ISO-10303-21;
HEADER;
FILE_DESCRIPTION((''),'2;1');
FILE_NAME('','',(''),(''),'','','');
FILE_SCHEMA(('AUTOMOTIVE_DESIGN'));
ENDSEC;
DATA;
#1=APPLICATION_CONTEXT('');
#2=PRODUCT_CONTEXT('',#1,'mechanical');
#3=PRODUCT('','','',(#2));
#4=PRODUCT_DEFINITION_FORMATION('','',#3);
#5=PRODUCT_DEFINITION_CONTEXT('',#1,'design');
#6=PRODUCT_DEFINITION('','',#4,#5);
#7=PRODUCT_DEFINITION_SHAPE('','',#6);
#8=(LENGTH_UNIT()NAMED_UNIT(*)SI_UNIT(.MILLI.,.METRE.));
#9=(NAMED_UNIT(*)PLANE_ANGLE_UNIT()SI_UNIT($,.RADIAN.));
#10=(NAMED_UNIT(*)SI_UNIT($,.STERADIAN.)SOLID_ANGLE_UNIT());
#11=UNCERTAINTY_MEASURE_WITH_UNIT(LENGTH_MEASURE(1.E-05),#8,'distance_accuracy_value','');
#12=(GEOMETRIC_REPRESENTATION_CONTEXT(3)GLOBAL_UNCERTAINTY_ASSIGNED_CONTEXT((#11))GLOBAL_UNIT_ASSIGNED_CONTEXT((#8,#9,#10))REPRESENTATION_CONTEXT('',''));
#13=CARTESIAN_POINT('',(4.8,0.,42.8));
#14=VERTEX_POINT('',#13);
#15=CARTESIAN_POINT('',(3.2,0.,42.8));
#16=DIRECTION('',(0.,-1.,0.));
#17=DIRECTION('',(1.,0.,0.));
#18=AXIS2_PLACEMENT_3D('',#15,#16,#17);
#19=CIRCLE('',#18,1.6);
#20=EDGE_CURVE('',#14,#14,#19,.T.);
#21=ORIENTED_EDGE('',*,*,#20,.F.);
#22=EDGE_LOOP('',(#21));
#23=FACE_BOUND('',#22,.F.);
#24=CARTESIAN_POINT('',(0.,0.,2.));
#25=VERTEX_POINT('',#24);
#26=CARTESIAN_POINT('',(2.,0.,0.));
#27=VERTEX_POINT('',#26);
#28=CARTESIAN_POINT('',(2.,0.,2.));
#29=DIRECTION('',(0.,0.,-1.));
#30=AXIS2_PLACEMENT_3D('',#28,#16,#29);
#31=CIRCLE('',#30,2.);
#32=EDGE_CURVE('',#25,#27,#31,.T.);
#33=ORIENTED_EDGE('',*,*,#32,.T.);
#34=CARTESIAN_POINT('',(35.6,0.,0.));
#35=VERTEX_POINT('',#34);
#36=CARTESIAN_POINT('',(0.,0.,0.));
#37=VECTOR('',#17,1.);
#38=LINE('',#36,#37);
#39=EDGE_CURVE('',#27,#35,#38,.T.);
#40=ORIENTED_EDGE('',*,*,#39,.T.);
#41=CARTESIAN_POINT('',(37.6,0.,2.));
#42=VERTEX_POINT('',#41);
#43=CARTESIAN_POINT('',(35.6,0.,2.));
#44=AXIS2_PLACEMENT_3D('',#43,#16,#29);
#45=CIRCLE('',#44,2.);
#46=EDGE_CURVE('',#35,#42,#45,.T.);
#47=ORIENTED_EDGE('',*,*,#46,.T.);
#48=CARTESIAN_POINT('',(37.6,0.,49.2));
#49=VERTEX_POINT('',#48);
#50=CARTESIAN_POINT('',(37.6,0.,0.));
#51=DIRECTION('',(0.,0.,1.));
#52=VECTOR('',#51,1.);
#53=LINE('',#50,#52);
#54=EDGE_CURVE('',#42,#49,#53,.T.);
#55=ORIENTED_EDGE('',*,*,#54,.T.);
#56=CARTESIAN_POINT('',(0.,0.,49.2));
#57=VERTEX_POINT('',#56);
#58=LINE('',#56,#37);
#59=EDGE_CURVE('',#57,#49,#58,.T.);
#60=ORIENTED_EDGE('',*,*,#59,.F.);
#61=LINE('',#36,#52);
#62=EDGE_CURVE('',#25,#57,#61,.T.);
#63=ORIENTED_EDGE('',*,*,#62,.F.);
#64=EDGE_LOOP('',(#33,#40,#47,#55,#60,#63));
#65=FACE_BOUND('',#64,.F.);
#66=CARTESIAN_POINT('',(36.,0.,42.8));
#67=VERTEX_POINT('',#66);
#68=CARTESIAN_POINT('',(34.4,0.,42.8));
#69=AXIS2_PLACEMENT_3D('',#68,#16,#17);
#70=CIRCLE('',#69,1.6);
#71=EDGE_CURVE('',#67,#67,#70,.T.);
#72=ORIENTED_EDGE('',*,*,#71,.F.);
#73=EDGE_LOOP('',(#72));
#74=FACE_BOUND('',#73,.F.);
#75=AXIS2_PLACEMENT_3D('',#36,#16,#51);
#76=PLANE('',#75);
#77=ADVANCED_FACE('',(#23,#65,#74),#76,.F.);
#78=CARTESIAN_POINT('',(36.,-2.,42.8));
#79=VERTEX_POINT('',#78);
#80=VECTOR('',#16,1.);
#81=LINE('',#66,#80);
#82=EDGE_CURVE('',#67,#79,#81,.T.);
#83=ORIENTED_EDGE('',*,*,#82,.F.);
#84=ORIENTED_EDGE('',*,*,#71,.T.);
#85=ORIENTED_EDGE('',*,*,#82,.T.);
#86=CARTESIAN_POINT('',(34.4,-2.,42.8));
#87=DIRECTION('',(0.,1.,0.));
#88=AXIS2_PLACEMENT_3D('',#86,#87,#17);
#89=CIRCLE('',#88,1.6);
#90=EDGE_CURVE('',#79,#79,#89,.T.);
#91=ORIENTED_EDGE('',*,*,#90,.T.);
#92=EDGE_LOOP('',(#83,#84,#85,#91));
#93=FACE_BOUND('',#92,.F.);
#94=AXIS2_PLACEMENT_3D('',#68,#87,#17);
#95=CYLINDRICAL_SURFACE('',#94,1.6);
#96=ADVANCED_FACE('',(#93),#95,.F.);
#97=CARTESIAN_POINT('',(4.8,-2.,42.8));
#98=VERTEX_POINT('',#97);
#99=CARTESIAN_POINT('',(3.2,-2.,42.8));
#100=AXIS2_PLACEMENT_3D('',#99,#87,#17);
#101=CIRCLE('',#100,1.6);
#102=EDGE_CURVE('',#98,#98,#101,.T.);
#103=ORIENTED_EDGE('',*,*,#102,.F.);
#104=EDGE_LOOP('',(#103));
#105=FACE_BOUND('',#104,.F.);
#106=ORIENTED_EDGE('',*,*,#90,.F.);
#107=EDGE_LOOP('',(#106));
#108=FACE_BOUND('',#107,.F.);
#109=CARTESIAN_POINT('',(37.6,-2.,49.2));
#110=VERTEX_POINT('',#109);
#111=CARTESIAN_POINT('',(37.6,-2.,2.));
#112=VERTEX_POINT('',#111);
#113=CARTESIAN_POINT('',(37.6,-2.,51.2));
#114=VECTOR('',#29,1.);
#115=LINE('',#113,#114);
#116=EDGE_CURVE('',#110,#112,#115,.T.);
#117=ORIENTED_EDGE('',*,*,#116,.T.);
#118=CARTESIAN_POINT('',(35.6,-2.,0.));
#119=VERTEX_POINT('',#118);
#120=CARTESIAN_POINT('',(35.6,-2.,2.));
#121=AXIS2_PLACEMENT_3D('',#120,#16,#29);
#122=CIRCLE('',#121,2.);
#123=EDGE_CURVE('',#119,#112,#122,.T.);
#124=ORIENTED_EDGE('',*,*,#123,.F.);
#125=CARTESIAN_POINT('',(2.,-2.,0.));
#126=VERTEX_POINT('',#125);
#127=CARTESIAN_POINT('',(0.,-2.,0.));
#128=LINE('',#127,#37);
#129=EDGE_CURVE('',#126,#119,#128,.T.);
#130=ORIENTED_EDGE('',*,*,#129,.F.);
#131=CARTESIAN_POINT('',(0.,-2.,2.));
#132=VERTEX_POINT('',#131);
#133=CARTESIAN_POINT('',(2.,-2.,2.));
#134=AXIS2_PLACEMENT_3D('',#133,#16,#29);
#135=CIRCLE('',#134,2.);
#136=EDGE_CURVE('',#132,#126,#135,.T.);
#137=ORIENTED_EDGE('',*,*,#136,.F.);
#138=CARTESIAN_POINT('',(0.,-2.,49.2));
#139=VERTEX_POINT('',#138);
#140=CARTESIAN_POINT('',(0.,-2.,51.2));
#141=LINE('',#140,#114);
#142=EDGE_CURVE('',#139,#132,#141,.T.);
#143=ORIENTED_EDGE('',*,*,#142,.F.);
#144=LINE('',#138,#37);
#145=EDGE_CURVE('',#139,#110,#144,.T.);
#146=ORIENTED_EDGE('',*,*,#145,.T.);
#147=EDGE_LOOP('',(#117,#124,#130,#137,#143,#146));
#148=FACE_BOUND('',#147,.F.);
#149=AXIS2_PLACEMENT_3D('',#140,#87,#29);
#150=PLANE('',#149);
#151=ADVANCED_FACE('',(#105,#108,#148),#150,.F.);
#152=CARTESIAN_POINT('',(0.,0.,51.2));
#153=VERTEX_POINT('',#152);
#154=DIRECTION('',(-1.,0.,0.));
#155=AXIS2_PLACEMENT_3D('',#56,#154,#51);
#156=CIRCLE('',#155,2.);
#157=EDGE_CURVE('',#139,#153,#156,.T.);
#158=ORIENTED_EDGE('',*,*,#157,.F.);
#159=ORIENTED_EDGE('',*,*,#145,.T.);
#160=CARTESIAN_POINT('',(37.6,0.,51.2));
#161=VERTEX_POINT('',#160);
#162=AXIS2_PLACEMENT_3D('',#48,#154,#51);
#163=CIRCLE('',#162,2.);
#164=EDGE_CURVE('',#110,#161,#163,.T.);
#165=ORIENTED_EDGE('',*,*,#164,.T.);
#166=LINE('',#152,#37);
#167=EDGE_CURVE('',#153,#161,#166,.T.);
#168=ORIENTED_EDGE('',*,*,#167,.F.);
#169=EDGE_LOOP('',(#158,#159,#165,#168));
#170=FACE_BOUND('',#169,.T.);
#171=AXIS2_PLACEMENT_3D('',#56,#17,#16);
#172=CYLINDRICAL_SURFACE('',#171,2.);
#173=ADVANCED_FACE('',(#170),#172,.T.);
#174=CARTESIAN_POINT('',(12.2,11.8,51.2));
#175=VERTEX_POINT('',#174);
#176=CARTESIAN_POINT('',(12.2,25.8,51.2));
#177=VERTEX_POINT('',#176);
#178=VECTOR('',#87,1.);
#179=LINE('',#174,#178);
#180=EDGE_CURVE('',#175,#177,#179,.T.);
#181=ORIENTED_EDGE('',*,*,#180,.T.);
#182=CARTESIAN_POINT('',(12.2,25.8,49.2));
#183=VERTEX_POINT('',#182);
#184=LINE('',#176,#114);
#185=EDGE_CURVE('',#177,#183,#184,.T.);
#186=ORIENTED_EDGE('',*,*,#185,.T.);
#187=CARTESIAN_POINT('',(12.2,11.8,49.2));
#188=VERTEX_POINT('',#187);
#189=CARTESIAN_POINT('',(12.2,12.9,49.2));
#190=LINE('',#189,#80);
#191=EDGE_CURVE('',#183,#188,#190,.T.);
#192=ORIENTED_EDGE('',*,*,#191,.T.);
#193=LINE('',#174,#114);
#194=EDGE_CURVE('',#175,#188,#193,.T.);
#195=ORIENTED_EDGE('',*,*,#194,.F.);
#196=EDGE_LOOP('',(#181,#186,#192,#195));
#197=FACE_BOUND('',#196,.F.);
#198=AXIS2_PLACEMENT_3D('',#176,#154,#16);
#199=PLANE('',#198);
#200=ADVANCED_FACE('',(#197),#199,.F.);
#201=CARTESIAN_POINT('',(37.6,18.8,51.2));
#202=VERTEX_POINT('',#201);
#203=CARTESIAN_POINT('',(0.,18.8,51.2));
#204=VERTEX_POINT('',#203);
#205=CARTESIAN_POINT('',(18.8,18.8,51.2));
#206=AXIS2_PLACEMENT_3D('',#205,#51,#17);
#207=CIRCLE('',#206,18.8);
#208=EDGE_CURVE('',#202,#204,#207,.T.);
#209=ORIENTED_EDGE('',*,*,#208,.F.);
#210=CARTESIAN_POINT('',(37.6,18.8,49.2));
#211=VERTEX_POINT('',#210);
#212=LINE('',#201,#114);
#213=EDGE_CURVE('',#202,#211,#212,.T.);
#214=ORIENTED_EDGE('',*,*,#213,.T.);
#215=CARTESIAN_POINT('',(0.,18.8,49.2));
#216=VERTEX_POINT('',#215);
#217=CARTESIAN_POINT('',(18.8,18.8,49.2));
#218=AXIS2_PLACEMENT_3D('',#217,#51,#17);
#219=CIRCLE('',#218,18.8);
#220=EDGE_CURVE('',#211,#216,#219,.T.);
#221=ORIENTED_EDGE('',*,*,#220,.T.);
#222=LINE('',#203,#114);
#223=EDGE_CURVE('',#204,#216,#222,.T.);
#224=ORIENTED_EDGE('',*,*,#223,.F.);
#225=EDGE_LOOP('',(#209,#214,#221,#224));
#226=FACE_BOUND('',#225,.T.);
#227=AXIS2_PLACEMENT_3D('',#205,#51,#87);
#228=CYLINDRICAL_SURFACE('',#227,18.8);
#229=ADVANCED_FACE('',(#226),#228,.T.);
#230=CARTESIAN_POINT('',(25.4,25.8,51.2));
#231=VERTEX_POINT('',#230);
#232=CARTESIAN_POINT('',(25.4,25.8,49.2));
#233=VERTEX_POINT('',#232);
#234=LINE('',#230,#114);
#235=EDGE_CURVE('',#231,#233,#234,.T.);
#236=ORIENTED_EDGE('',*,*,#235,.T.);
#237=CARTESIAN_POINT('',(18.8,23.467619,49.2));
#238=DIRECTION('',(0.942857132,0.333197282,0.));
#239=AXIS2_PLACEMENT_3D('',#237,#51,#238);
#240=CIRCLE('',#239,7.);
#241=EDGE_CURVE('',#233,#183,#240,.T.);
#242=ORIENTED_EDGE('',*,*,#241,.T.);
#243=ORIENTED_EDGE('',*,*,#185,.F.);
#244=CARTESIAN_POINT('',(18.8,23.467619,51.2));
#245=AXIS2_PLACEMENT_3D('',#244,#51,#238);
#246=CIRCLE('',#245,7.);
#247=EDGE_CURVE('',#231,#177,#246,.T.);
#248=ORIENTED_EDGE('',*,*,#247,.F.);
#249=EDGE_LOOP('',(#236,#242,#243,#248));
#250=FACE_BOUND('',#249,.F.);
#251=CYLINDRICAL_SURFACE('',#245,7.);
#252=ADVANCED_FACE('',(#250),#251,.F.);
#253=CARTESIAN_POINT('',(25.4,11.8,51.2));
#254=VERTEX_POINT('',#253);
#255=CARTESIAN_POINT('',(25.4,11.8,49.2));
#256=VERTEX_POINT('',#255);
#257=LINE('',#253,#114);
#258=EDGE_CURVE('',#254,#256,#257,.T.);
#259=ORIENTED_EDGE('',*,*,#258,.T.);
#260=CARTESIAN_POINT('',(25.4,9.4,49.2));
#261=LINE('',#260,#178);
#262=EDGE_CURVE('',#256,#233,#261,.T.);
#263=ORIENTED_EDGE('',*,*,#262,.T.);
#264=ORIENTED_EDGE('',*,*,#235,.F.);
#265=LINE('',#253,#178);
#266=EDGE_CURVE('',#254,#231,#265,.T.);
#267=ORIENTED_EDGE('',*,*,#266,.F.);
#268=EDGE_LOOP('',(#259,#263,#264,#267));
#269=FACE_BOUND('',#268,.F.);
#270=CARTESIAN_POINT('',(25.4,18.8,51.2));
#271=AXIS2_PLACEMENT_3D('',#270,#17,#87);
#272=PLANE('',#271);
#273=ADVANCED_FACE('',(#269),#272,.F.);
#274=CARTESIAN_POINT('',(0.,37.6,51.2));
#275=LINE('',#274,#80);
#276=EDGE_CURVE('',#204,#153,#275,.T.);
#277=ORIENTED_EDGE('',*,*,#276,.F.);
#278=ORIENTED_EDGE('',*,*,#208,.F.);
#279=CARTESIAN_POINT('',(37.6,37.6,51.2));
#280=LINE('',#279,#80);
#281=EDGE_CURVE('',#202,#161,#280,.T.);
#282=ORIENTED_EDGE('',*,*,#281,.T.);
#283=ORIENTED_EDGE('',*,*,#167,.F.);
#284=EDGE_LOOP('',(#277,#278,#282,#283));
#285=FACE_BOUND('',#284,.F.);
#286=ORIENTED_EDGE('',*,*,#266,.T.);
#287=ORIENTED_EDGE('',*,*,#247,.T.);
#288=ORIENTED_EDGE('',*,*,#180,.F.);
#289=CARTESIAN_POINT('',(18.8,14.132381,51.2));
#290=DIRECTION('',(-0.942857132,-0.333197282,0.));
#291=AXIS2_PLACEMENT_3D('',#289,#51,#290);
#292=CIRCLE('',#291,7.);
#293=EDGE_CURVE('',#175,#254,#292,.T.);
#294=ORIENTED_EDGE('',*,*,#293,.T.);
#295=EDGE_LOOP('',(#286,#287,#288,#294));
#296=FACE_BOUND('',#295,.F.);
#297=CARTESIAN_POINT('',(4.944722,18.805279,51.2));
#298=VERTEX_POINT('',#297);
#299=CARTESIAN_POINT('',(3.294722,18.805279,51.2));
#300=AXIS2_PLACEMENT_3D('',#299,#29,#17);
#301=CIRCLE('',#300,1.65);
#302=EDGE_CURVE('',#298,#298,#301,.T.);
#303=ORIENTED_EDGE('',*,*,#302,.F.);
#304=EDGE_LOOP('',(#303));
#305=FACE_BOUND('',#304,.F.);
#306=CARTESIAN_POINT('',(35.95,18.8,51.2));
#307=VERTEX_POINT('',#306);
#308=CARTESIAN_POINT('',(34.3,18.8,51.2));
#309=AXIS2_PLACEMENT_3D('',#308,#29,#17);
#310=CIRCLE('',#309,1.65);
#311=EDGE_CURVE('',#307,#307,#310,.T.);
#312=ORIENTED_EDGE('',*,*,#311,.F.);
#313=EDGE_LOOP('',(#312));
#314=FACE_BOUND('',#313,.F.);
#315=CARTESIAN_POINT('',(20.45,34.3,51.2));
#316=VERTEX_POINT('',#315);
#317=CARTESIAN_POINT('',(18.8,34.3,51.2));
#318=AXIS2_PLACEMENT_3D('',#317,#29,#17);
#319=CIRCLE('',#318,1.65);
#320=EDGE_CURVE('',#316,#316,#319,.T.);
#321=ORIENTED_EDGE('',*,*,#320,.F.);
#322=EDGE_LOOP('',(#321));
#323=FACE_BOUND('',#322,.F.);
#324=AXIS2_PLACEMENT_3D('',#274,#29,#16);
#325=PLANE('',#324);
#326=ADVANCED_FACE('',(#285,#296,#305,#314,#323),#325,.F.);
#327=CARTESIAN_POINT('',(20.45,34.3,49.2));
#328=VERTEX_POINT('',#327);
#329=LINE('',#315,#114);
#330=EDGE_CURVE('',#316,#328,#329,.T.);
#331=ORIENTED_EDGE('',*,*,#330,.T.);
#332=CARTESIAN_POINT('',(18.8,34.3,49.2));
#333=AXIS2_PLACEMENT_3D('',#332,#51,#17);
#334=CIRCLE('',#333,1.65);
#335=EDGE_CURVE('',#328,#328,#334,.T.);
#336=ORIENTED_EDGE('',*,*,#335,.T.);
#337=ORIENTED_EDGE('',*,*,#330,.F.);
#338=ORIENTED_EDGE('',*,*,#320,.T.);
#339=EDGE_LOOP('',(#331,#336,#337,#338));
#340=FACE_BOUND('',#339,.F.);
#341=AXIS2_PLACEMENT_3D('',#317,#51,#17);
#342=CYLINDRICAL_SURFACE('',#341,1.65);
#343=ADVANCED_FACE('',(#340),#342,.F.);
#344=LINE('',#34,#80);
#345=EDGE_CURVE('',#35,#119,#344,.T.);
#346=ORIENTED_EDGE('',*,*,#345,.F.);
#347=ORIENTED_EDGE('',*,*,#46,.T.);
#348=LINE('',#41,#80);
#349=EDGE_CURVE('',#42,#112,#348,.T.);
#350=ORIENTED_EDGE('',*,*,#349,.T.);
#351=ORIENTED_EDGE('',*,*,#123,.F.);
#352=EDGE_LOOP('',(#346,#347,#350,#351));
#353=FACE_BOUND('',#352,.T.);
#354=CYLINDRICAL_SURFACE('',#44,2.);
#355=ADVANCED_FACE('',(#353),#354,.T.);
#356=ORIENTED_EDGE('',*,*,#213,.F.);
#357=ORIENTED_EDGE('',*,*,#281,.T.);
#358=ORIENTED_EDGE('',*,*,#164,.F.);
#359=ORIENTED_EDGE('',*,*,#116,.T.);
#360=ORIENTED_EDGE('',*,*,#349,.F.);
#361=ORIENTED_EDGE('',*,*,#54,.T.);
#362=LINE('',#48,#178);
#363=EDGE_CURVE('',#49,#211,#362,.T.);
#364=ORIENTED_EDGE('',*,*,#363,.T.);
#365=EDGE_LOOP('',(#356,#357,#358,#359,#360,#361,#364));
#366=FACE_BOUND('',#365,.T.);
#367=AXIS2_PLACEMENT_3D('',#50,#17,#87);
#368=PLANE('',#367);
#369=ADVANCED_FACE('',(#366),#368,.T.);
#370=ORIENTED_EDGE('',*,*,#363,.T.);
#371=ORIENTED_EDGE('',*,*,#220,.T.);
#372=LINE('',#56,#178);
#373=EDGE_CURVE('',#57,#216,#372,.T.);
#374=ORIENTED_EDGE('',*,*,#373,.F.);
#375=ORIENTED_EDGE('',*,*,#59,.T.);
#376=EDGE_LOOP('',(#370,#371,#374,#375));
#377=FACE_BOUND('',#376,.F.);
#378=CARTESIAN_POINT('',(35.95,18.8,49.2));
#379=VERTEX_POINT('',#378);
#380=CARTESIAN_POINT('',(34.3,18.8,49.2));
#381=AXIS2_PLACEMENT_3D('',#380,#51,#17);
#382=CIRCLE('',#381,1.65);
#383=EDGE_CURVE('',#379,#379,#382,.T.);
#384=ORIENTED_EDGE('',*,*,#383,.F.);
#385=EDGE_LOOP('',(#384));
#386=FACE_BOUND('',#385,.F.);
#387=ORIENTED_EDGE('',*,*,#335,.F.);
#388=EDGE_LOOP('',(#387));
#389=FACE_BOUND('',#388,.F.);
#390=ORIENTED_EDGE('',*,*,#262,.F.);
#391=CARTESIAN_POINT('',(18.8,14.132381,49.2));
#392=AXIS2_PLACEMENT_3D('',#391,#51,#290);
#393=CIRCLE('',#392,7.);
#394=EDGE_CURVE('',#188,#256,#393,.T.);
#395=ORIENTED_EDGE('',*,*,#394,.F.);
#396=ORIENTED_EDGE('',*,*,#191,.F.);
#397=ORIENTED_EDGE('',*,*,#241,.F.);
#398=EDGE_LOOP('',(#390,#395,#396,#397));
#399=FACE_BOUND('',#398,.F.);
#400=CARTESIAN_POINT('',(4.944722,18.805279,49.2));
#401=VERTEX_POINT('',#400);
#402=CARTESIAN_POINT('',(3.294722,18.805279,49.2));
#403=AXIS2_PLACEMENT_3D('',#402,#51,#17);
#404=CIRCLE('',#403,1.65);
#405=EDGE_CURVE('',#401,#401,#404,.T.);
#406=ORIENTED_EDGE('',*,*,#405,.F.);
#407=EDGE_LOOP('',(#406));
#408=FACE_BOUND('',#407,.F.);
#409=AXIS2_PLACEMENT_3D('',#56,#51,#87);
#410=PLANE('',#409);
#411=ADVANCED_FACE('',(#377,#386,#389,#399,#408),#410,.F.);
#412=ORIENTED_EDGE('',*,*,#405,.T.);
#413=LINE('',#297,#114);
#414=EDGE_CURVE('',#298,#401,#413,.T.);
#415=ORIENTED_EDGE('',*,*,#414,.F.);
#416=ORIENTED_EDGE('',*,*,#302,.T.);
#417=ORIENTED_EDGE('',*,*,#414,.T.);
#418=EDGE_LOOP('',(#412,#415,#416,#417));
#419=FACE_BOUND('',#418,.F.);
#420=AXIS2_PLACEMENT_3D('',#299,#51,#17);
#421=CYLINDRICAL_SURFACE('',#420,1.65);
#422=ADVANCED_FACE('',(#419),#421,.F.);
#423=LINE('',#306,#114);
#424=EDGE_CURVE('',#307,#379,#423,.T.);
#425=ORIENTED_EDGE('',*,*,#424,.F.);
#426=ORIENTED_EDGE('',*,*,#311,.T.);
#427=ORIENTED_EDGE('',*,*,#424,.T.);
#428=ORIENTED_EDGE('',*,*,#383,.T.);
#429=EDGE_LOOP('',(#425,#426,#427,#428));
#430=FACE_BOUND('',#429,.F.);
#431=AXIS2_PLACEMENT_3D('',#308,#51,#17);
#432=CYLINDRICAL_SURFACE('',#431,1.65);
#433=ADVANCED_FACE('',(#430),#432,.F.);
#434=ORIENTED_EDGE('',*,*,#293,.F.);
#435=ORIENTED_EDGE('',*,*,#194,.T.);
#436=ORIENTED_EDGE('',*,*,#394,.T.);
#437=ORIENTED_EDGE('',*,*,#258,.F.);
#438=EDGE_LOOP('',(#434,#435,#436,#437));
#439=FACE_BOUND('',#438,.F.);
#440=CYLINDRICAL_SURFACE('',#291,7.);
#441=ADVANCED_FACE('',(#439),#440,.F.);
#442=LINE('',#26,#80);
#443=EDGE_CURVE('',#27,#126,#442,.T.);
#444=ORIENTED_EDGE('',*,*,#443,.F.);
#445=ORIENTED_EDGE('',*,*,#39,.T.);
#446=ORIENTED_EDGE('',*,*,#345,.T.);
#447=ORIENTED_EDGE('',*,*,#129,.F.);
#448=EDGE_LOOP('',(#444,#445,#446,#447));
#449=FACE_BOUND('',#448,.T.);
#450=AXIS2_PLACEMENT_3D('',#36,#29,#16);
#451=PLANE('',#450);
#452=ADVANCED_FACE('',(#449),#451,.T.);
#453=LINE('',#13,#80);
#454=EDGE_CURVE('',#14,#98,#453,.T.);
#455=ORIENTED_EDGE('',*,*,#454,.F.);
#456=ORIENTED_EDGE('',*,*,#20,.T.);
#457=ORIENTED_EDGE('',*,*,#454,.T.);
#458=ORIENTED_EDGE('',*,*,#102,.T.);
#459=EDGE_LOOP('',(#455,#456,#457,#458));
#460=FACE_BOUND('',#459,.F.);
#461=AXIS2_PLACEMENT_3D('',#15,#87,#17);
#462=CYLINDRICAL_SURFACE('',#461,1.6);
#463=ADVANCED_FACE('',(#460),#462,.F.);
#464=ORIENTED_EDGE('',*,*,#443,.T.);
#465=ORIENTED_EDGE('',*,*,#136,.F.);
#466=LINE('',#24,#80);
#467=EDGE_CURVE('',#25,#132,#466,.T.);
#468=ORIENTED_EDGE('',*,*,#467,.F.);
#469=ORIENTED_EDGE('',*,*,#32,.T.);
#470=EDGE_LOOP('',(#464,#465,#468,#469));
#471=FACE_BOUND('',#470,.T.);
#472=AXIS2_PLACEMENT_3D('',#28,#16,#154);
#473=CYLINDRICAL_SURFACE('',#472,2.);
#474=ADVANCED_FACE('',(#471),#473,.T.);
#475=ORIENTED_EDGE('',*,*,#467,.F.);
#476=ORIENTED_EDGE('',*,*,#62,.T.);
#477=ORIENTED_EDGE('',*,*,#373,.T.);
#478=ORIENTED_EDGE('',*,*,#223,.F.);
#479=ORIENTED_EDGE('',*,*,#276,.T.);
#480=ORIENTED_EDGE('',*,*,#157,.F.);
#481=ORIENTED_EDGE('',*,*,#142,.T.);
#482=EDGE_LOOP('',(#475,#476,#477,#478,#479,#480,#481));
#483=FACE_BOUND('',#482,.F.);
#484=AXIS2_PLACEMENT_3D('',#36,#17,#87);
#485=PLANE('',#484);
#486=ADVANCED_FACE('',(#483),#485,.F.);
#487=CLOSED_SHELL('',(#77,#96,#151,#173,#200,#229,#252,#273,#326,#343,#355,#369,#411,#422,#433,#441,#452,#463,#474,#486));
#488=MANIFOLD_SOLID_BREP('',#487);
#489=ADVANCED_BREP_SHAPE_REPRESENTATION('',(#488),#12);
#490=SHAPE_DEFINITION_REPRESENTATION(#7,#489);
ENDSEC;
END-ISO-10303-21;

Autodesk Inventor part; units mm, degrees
ref_plane "YZ Plane" through (0, 0, 0) normal (1, 0, 0) x (0, 1, 0)
ref_plane "XZ Plane" through (0, 0, 0) normal (0, 1, 0) x (-1, 0, 0)
ref_plane "XY Plane" through (0, 0, 0) normal (0, 0, 1) x (1, 0, 0)
sketch "Sketch1" plane through (0, 0, 0) normal (1, 0, 0) x (0, 1, 0)
  line L0 (0, 0) -> (0, 49.2)
  line L1 (0, 49.2) -> (37.6, 49.2)
  line L2 (37.6, 51.2) -> (-2, 51.2)
  line L3 (-2, 51.2) -> (-2, 0)
  line L4 (37.6, 51.2) -> (37.6, 49.2)
  line L5 (0, 0) -> (-2, 0)
  dimension "d0" = 49.2
  dimension "d1" = 37.6
  dimension "d2" = 2
extrude "Extrusion1" add sketch "Sketch1" along normal blind 37.6
fillet "Fillet1" radius 2 1 edges at (18.8, -2, 51.2)
fillet "Fillet2" radius 2 2 edges at (37.6, -1, 0) (0, -1, 0)
sketch "Sketch2" plane through (0, 37.6, 51.2) normal (0, 0, 1) x (1, 0, 0)
  line L0 (0, -39.6) -> (37.6, -39.6)
  line L1 (0, -39.6) -> (0, -18.8)
  line L2 (0, -37.6) -> (0, 0)
  circle A0 centre (18.794722, -18.794721) radius 15.5
  circle A1 centre (3.294722, -18.794721) radius 1.65
  circle A2 centre (34.3, -18.8) radius 1.65
  circle A3 centre (18.8, -3.3) radius 1.65
  circle A4 centre (18.794722, -18.794721) radius 18.805278
  line L3 (37.6, -37.6) -> (37.6, 0)
  line L4 (37.6, -18.8) -> (37.6, 0)
  line L5 (0, 0) -> (37.6, 0)
  line L6 (37.6, 0) -> (0, 0)
  line L7 (0, 0) -> (0, -18.16472)
  arc A5 (37.6, -18.8) -> (0, -18.8) centre (18.8, -18.8) ccw
  line L8 (18.8, -18.8) -> (18.8, -11.8)
  line L9 (18.8, -11.8) -> (18.8, -25.8)
  line L10 (18.8, -18.8) -> (25.4, -18.8)
  line L11 (25.4, -18.8) -> (12.2, -18.8)
  line L12 (18.8, -11.8) -> (12.2, -11.8)
  line L13 (12.2, -11.8) -> (12.2, -25.8)
  line L14 (12.2, -25.8) -> (25.4, -25.8)
  line L15 (25.4, -25.8) -> (25.4, -11.8)
  line L16 (25.4, -11.8) -> (18.8, -11.8)
  arc A6 (25.4, -11.8) -> (12.2, -11.8) centre (18.8, -14.132381) ccw
  arc A7 (12.2, -25.8) -> (25.4, -25.8) centre (18.8, -23.467619) ccw
  dimension "d8" = 31
  dimension "d7" = 20.8
  dimension "d9" = 3.3
  dimension "d10" = 3.3
  dimension "d11" = 3.3
  dimension "d16" = 7
  dimension "d17" = 14
  dimension "d18" = 6.6
  dimension "d19" = 13.2
  dimension "d20" = 7
  dimension "d21" = 7
extrude "Extrusion2" cut sketch "Sketch2" against normal through all contours A0 A2 | A0 A2 | A3 A0 | A0 A3 | A1 A0 | A0 A1
sketch "Sketch2 outline for Extrusion3" plane through (0, 37.6, 51.2) normal (0, 0, 1) x (1, 0, 0)
  line L0 (0, 0) -> (0, -18.8)
  arc A0 (18.8, 0) -> (0, -18.8) centre (18.8, -18.8) ccw
  line L1 (18.8, 0) -> (0, 0)
  arc A1 (37.6, -18.8) -> (18.8, 0) centre (18.8, -18.8) ccw
  line L2 (37.6, 0) -> (18.8, 0)
  line L3 (37.6, -18.8) -> (37.6, 0)
extrude "Extrusion3" cut sketch "Sketch2 outline for Extrusion3" against normal through all
extrude "Extrusion4" cut sketch "Sketch2" against normal blind 37.6 contours L11 L13 L12 L8 | L10 L15 L14 L9 | L8 L16 L15 L10 | L9 L14 L13 L11 | L12 A6 L16 | L14 A7
sketch "Sketch4" plane through (0, 0, 49.2) normal (0, 1, 0) x (1, 0, 0)
  line L0 (37.6, -2) -> (0, -2) projected
  line L1 (0, -2) -> (0, 6.4)
  line L2 (0, 47.2) -> (0, 0) projected
  line L3 (18.8, -2) -> (3.2, -2)
  line L4 (3.2, -2) -> (34.4, -2)
  line L5 (3.2, -2) -> (3.2, 6.4)
  circle A0 centre (3.2, 6.4) radius 1.6
  line L6 (34.4, -2) -> (34.4, 6.4)
  circle A1 centre (34.4, 6.4) radius 1.6
  point P0 (0, 49.2)
  dimension "d24" = 8.4
  dimension "d25" = 15.6
  dimension "d26" = 31.2
  dimension "d27" = 3.2
  dimension "d28" = 3.2
extrude "Extrusion5" cut sketch "Sketch4" against normal blind 37.6
properties part number "motor mount"
